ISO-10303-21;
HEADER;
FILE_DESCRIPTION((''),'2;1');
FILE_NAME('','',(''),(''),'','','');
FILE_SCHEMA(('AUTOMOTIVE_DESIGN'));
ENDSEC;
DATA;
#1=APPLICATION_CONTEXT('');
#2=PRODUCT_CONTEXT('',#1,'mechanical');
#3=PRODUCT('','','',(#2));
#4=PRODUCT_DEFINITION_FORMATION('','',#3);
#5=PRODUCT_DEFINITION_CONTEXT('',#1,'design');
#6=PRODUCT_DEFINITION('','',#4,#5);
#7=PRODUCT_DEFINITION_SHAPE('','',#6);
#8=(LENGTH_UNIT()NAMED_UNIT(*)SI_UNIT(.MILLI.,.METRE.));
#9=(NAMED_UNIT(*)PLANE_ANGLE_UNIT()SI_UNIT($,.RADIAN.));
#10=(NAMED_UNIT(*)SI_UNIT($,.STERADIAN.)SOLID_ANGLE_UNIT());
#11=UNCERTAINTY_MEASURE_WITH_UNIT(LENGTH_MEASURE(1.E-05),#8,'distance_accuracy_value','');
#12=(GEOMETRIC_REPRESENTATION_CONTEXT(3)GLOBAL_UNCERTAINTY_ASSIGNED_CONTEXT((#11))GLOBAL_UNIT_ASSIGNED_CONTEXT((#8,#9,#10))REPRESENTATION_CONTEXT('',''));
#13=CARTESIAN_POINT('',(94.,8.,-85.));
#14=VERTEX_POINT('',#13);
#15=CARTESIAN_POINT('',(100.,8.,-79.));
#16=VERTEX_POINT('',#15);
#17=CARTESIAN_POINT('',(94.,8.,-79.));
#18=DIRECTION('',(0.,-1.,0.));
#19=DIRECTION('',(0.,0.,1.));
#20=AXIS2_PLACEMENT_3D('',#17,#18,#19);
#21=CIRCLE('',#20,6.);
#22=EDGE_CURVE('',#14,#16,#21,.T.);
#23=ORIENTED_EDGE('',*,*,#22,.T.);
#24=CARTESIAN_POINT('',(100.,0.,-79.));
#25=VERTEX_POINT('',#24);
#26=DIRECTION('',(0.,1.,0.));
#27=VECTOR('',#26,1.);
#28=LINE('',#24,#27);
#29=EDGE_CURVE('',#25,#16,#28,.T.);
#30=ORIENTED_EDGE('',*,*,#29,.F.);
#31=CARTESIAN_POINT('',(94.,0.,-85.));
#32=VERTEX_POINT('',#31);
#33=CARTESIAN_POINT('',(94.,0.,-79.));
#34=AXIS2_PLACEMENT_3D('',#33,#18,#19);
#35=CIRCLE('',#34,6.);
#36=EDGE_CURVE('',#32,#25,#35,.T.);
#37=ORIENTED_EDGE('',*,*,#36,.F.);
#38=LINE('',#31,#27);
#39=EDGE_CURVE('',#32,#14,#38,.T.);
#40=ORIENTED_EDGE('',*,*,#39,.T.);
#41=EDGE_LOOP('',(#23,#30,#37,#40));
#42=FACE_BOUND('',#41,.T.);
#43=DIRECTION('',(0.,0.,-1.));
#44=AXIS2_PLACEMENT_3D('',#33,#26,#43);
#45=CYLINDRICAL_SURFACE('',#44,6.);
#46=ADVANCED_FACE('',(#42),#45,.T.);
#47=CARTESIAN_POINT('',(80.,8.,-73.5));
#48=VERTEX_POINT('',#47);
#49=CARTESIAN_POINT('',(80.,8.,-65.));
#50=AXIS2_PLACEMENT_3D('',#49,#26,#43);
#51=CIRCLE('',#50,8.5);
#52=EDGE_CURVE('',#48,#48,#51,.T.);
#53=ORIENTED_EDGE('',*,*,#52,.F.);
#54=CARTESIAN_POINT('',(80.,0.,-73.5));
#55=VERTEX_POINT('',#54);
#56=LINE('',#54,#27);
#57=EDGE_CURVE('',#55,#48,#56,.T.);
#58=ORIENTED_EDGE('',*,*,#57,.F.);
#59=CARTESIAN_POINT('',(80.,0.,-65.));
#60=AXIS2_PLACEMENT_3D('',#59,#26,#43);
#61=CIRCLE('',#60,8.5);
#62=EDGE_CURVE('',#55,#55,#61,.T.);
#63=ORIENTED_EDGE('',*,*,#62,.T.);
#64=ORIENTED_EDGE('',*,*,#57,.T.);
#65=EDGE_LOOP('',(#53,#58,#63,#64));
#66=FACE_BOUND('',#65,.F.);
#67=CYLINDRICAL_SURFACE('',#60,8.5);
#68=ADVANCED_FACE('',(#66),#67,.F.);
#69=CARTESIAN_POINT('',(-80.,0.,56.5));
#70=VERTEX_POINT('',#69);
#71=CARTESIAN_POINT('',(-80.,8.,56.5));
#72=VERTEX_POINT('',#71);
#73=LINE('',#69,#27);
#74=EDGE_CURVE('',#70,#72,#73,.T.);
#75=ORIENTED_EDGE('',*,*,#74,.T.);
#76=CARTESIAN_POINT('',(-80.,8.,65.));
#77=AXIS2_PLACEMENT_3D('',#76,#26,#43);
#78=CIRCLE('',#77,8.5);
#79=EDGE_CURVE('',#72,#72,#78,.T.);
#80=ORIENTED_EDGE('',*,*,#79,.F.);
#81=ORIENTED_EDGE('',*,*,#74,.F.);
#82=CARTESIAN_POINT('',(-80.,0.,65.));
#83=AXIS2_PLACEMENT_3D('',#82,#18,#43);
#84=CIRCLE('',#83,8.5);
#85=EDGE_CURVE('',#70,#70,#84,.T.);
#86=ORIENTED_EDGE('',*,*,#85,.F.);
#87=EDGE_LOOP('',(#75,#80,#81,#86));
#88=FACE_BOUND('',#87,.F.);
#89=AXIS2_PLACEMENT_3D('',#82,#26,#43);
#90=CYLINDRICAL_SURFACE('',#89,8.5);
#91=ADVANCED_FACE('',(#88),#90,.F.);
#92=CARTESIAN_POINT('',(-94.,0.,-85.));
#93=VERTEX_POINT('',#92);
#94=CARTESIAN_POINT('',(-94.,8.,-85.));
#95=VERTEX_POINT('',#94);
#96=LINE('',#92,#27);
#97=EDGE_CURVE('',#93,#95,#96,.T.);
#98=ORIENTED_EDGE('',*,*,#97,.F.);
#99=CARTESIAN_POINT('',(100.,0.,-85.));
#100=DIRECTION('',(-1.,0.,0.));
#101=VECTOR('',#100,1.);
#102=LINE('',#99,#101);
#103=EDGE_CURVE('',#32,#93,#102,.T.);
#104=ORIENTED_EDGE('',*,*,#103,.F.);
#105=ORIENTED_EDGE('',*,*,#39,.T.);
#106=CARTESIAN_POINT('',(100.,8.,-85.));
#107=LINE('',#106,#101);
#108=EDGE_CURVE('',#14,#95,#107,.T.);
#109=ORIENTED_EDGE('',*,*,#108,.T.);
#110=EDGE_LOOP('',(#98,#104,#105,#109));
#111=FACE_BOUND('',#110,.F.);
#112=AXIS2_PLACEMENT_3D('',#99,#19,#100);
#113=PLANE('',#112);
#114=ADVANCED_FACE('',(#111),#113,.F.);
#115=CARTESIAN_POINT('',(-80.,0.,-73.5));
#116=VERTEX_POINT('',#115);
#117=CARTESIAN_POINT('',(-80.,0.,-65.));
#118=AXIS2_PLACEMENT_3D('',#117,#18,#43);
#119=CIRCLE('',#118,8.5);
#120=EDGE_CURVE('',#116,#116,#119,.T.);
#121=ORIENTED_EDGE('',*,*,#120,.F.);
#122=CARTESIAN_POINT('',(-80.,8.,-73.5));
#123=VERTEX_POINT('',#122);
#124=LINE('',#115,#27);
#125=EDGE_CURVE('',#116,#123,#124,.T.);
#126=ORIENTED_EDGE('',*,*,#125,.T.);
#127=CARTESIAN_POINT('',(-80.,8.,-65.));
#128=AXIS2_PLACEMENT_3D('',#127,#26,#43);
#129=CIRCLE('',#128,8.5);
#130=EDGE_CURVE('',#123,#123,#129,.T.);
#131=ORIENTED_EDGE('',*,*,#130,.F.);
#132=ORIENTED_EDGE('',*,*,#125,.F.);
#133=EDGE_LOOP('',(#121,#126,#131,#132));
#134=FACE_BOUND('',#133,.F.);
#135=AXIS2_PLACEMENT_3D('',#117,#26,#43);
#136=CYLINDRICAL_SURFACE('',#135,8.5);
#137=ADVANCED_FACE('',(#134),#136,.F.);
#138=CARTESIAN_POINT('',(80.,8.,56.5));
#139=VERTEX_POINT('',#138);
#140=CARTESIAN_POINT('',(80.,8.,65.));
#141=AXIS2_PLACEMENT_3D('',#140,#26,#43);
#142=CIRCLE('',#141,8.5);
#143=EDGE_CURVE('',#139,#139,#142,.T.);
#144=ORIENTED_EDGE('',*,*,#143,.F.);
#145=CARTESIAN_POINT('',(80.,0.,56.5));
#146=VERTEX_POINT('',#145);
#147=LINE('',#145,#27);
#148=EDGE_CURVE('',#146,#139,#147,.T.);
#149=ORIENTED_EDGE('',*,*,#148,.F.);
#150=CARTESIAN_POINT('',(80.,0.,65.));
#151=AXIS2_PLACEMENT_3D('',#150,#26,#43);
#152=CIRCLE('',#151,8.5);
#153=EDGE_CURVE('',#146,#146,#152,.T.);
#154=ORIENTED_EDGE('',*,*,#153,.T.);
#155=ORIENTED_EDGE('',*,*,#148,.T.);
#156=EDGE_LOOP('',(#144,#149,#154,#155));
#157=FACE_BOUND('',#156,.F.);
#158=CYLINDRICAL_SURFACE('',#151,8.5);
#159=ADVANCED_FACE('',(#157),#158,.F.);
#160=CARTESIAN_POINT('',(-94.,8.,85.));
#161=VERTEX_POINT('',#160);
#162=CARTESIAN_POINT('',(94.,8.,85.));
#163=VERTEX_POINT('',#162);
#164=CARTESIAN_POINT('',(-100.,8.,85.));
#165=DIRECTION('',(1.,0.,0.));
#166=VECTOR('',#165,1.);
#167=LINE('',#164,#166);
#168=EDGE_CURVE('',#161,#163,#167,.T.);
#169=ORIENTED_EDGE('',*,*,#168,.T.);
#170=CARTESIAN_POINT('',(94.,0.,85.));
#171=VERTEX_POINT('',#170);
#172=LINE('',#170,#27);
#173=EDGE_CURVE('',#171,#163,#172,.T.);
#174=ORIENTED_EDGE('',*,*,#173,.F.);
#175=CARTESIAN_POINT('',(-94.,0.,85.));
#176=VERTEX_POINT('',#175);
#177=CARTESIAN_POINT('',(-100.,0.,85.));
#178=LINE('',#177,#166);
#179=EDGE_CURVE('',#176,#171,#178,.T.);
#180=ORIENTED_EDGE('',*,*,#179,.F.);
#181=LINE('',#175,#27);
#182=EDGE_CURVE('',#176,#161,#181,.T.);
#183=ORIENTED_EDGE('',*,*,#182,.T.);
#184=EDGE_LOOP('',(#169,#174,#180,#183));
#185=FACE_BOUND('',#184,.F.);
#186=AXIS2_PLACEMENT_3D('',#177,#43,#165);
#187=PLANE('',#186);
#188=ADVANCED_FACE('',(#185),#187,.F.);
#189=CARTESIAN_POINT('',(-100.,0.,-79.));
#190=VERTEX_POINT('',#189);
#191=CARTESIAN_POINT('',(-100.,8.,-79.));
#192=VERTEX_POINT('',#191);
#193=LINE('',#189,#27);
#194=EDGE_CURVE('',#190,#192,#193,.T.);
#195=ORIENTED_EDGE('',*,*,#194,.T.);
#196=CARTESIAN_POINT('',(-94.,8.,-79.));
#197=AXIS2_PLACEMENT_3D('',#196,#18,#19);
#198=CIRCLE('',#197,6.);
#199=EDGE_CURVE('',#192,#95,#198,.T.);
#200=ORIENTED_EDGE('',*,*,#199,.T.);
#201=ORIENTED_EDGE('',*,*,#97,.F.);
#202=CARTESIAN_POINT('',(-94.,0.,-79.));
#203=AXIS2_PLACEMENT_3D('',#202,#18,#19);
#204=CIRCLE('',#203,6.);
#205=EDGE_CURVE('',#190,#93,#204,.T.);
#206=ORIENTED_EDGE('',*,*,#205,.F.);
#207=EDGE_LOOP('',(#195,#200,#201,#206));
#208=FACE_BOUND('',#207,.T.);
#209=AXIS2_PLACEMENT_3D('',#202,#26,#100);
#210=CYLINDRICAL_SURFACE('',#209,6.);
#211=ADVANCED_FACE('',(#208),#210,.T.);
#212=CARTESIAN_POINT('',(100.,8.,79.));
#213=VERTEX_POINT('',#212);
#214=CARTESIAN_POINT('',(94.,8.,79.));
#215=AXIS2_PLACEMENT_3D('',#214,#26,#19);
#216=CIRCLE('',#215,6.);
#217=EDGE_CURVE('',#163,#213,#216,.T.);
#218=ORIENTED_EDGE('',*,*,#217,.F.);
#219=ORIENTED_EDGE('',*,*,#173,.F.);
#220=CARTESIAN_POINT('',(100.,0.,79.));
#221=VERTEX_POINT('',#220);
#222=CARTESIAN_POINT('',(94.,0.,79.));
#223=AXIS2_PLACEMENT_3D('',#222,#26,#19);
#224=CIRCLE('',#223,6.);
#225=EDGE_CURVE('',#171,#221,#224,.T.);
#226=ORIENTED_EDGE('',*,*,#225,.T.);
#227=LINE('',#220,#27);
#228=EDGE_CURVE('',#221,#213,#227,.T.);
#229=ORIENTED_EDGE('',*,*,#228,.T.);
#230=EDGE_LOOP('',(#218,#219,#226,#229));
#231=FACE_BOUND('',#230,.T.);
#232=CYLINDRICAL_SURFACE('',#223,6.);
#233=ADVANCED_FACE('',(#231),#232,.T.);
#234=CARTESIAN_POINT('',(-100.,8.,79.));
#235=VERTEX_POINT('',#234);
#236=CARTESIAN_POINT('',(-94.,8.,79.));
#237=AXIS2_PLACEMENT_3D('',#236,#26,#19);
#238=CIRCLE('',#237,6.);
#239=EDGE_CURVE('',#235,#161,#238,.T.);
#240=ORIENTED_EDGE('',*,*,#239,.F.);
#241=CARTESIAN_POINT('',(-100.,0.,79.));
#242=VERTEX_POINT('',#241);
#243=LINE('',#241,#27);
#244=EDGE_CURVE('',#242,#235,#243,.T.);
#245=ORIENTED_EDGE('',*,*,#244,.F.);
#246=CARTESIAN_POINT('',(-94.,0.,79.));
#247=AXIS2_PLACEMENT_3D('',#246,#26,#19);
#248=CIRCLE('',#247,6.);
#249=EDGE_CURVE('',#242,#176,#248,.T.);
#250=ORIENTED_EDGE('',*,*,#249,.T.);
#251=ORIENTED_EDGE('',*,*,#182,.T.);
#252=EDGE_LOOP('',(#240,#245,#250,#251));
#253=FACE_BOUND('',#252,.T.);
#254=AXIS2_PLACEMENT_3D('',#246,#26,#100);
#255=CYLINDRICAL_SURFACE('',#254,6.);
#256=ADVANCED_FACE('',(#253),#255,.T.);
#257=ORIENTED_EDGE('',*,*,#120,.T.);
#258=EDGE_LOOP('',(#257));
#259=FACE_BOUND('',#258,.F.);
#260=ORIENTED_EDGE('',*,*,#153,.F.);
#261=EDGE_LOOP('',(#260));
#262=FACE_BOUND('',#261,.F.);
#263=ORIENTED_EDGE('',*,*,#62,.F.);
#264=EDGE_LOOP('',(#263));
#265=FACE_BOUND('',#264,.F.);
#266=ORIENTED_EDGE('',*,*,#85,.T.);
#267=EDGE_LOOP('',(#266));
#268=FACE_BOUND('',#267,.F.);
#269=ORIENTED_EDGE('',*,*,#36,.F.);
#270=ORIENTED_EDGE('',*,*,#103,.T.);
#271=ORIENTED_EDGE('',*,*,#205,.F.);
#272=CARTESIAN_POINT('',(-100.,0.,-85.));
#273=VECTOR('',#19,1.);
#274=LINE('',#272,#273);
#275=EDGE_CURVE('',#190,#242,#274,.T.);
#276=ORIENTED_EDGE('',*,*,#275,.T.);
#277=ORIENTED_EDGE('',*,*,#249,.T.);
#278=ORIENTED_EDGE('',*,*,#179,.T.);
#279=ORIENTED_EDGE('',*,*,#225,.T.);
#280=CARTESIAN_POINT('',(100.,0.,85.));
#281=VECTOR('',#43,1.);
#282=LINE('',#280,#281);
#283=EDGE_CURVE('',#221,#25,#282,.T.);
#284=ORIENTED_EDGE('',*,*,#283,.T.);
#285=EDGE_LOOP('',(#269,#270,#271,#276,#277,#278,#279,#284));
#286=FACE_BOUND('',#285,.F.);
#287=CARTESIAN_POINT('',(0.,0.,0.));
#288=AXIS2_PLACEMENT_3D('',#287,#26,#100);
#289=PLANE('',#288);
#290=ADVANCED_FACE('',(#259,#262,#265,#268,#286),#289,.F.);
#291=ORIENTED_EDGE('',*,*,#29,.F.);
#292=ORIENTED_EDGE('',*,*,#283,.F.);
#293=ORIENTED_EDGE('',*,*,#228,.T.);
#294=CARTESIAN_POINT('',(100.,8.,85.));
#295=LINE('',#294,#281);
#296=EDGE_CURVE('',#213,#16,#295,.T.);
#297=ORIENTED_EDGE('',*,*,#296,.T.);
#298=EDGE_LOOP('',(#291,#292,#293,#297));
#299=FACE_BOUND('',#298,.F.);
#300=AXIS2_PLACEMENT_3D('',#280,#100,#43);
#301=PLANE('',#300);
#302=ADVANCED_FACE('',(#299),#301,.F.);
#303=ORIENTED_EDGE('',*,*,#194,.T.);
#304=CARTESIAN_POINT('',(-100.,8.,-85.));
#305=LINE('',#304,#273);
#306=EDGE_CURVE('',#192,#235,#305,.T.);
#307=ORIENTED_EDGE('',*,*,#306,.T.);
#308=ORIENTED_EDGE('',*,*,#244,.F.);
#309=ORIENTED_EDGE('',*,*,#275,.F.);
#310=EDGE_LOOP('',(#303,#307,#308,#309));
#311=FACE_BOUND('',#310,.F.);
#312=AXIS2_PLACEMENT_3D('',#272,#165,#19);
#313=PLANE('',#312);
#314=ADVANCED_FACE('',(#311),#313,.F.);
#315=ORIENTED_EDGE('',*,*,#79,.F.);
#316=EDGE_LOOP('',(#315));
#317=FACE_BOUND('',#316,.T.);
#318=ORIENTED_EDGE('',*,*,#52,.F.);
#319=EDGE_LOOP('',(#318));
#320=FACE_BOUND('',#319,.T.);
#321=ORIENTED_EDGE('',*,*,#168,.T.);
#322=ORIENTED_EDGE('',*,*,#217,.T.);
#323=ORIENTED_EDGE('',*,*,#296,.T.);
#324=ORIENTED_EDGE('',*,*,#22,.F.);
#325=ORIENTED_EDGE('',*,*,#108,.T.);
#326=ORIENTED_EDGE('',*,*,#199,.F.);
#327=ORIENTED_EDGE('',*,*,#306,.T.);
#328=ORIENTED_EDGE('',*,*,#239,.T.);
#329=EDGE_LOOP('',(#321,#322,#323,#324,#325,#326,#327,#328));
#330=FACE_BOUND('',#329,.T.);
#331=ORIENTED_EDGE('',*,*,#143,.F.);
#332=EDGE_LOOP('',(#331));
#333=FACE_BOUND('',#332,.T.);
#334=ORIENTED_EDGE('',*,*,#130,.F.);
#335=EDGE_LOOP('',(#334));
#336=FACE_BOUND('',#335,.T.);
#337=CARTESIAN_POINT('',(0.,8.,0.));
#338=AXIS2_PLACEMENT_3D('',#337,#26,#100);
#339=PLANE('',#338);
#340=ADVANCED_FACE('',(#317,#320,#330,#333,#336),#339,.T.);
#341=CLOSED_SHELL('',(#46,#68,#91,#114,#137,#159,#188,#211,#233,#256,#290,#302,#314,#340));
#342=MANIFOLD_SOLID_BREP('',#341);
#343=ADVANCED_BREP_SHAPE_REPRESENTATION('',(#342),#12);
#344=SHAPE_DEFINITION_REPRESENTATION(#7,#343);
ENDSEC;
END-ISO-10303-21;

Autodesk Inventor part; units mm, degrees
ref_plane "YZ Plane" through (0, 0, 0) normal (1, 0, 0) x (0, 1, 0)
ref_plane "XZ Plane" through (0, 0, 0) normal (0, 1, 0) x (-1, 0, 0)
ref_plane "XY Plane" through (0, 0, 0) normal (0, 0, 1) x (1, 0, 0)
sketch "Sketch1" plane through (0, 0, 0) normal (0, 1, 0) x (-1, 0, 0)
  line L0 (100, 85) -> (-100, 85)
  line L1 (-100, 85) -> (-100, -85)
  line L2 (-100, -85) -> (100, -85)
  line L3 (100, -85) -> (100, 85)
  point P0 (0, 0)
  point P1 (0, 85)
  point P2 (100, 0)
  dimension "d0" = 200
  dimension "d1" = 170
extrude "Plate1" add sketch "Sketch1" along normal blind 8
sketch "Sketch2" plane through (0, 0, 0) normal (0, -1, 0) x (1, 0, 0)
  line L0 (80, 65) -> (80, -65) construction
  line L1 (-100, -85) -> (-100, 85) projected
  line L2 (100, 85) -> (100, -85) projected
  point P0 (0, 0)
  point P1 (80, 0)
  point P2 (-100, 0)
  dimension "d10" = 20
  dimension "d12" = 20
hole "Hole1" at (80, 0, 65) at (80, 0, -65) direction (0, 1, 0) diameter 17 end through all
fillet "Corner Round1" radius 6 4 edges at (100, 4, 85) (100, 4, -85) (-100, 4, -85) (-100, 4, 85)
mirror "Mirror1" about plane through (0, 0, 0) normal (1, 0, 0) of "Hole1"
equation "\"d12\" = d10"
equation "\"d8\" = Thickness"
equation "\"d2\" = Thickness"
equation "\"BendRadius\" = Thickness"
equation "\"BendReliefWidth\" = Thickness"
equation "\"BendReliefDepth\" = 0.5 * Thickness"
equation "\"CornerReliefSize\" = 4 * Thickness"
equation "\"MinimumRemnant\" = 2 * Thickness"
equation "\"TransitionRadius\" = BendRadius"
equation "\"JacobiRadiusSize\" = BendRadius"
equation "\"GapSize\" = Thickness"
equation "\"Thickness\" = 8"
properties part number "пластина нижняя соед X16"
